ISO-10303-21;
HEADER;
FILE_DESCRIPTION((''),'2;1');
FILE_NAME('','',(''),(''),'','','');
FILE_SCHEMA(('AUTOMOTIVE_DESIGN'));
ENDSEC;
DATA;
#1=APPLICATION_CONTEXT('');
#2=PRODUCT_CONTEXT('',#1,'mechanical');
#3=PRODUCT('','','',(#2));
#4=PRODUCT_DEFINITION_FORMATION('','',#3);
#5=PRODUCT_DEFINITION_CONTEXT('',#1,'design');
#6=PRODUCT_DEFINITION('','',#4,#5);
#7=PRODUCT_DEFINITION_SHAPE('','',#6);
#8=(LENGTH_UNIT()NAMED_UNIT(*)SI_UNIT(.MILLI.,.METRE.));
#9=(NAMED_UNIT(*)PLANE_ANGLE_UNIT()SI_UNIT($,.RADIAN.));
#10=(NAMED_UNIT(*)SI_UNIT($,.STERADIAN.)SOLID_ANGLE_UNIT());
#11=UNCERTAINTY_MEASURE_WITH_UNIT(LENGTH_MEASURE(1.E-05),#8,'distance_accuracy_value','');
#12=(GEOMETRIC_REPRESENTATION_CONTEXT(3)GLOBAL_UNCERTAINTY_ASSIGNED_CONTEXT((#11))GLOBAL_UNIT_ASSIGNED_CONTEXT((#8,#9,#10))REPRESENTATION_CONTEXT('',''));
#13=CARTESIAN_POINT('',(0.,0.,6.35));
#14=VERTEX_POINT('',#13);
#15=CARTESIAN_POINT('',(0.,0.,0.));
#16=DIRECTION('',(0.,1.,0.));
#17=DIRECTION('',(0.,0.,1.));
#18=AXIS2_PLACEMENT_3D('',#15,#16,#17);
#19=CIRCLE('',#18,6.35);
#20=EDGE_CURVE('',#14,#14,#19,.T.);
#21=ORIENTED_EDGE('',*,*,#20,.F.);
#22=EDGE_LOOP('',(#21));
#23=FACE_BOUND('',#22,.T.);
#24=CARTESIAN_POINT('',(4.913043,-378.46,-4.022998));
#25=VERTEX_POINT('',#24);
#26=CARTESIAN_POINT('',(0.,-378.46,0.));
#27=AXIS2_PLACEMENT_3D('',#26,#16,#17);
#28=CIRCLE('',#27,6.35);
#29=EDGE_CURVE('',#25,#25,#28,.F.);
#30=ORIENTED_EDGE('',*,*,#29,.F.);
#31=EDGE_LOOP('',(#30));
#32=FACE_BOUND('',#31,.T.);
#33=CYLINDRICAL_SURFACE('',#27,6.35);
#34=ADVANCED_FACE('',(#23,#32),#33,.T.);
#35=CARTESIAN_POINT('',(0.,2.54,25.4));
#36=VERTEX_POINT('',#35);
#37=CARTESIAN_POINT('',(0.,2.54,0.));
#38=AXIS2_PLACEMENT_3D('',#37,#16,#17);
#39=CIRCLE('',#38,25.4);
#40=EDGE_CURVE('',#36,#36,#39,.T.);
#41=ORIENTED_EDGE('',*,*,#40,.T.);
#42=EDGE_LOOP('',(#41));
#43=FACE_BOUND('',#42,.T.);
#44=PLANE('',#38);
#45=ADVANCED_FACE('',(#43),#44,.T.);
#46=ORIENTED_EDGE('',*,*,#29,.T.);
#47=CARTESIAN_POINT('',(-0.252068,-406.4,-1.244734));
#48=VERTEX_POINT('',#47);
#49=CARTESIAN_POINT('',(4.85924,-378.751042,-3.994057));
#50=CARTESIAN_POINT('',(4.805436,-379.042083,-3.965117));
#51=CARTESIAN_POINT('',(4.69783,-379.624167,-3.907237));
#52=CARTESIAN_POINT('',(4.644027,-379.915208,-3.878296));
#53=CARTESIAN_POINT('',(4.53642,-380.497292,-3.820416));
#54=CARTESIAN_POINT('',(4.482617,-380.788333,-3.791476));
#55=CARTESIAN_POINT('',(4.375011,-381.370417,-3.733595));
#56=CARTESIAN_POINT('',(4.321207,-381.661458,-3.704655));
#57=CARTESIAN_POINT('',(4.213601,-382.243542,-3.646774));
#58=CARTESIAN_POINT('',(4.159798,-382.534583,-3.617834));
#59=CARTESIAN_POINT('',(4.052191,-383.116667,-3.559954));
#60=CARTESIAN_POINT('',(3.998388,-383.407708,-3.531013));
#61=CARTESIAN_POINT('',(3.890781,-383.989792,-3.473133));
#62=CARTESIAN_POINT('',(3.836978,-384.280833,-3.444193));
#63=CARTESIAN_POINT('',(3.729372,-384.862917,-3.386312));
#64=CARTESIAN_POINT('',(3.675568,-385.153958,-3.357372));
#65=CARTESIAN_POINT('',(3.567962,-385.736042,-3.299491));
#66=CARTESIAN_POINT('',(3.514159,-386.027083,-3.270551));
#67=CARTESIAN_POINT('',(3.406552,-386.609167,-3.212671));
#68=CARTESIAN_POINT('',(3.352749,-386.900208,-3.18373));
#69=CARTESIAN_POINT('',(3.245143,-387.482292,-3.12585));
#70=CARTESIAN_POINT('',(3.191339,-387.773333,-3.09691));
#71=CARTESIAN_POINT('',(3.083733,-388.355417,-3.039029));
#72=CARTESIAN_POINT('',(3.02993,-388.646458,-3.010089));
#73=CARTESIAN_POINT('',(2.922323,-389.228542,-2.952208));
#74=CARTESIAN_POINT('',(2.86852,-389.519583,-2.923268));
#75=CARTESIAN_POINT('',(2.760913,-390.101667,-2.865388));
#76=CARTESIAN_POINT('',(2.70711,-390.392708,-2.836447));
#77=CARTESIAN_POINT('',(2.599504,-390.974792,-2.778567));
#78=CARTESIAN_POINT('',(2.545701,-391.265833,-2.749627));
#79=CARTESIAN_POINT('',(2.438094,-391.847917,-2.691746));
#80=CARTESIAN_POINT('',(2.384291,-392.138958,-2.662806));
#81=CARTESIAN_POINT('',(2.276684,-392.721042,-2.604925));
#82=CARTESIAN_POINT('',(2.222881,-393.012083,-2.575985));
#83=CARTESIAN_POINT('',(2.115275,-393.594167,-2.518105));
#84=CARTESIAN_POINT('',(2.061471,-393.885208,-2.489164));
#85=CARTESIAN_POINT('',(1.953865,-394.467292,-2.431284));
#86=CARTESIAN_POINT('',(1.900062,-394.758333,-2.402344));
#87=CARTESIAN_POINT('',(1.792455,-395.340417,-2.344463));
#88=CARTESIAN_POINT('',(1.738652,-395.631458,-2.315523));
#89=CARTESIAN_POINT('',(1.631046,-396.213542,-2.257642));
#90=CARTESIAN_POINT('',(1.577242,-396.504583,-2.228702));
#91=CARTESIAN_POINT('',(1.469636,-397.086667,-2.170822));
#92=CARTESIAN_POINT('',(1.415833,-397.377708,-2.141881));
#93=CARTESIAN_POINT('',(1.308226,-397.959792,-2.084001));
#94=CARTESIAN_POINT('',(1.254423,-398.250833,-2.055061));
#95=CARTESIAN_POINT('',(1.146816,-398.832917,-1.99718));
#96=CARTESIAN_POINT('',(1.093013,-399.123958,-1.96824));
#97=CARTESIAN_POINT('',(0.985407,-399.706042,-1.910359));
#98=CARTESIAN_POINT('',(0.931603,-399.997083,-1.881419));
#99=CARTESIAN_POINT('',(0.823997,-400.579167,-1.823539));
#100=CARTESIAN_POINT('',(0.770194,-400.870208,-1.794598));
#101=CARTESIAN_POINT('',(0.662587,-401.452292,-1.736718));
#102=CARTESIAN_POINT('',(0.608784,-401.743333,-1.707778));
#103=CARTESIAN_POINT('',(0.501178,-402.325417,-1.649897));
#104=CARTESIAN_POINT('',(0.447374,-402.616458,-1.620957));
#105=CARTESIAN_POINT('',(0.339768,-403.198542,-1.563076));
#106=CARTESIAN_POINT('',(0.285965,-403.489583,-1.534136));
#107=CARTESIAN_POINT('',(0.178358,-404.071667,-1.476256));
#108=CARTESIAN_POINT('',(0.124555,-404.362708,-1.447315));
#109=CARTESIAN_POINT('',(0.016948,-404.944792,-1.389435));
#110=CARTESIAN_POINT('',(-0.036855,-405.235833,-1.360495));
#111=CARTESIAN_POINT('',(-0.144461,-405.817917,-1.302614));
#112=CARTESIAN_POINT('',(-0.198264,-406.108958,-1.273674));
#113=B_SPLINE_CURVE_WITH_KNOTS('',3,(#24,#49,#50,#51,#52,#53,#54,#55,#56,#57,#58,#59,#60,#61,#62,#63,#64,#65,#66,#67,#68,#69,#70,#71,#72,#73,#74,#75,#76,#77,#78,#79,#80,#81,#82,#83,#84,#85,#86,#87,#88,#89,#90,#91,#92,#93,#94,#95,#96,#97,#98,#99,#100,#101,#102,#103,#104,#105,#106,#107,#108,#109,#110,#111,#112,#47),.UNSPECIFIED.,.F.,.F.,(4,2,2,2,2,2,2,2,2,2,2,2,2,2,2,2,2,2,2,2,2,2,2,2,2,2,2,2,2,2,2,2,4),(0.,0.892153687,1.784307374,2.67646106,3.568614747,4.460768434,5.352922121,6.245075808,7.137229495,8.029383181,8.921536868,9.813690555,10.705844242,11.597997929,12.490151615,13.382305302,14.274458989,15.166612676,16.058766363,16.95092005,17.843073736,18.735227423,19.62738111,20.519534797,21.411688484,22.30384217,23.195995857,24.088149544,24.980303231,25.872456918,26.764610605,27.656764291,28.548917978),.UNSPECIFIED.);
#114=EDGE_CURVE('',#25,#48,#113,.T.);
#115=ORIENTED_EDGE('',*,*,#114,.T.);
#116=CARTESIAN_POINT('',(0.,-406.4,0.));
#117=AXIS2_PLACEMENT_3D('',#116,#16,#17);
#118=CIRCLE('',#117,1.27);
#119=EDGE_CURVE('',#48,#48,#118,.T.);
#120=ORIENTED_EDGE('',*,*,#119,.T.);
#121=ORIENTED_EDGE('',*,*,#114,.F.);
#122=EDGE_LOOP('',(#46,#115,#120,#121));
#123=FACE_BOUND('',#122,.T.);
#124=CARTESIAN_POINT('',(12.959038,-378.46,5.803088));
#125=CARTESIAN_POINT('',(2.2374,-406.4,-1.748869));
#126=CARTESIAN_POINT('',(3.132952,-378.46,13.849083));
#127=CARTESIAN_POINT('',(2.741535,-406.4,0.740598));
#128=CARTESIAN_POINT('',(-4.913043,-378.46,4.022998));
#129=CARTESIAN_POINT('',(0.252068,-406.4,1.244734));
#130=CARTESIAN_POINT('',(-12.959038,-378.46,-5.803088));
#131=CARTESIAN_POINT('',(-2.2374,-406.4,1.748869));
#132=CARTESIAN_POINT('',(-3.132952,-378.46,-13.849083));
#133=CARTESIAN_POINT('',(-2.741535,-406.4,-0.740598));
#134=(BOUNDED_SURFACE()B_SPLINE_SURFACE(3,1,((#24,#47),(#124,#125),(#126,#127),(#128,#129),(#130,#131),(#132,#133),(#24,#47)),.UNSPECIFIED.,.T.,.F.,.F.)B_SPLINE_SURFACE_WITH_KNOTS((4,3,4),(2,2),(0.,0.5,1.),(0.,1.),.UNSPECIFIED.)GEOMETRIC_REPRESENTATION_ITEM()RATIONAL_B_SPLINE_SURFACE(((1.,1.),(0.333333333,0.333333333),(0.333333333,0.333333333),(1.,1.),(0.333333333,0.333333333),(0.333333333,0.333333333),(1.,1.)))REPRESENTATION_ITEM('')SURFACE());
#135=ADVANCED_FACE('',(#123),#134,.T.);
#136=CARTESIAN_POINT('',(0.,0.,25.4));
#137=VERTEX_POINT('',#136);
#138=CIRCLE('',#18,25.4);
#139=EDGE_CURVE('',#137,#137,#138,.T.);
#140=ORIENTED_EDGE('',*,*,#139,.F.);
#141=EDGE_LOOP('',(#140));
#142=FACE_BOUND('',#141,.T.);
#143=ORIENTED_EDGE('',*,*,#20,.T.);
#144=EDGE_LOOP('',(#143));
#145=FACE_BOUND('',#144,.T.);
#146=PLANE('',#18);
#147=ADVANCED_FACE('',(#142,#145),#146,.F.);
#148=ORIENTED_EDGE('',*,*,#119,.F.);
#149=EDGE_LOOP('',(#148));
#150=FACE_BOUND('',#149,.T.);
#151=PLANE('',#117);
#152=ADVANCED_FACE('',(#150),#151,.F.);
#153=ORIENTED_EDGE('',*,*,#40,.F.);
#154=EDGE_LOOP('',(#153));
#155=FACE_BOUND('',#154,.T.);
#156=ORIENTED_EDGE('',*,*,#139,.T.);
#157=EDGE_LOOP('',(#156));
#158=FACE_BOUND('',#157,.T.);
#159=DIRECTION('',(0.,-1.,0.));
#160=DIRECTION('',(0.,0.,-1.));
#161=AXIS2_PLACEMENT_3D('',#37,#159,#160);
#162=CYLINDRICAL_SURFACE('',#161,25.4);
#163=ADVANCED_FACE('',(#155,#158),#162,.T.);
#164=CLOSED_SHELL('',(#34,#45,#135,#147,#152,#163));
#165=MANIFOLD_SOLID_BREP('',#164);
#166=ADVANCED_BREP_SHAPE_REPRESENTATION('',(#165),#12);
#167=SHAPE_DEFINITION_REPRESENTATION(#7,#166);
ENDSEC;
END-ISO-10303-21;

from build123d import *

# Parameters (mm, degrees)
SKETCH1_R           = 25.4
BOSS_EXTRUDE1_DEPTH = 2.54
SKETCH2_R           = 6.35
BOSS_EXTRUDE2_DEPTH = 381


with BuildPart() as part:
    # Sketch1 → Boss-Extrude1 (new body)
    with BuildSketch(Plane(origin=(0, 0, 0), x_dir=(1, 0, 0), z_dir=(0, 1, 0))):
        with Locations(Location((0, 0, 0), (0, 0, 270))):
            Circle(SKETCH1_R)
    extrude(amount=BOSS_EXTRUDE1_DEPTH)

    # Sketch2 → Boss-Extrude2 (add)
    with BuildSketch(Plane(origin=(0, 2.54, 0), x_dir=(1, 0, 0), z_dir=(0, 1, 0))):
        with Locations(Location((0, 0, 0), (0, 0, 270))):
            Circle(SKETCH2_R)
    extrude(amount=-BOSS_EXTRUDE2_DEPTH)

    # Loft1: read off the stored shape, not the designer's step
    # Loft1: loft between two sections, ruled curve by curve
    loft1_from = [
        Edge.make_bspline([(4.913042865, -378.46, -4.022997615), (12.959038094, -378.46, 5.803088115), (3.132952365, -378.46, 13.849083344), (-4.913042865, -378.46, 4.022997615), (-12.959038094, -378.46, -5.803088115), (-3.132952365, -378.46, -13.849083344), (4.913042865, -378.46, -4.022997615)], [0, 0, 0, 0, 0.5, 0.5, 0.5, 1, 1, 1, 1], 3, [1, 0.333333333, 0.333333333, 1, 0.333333333, 0.333333333, 1]),
    ]
    loft1_to = [
        Edge.make_bspline([(-0.252067696, -406.4, -1.244733657), (2.237399617, -406.4, -1.748869049), (2.74153501, -406.4, 0.740598264), (0.252067696, -406.4, 1.244733657), (-2.237399617, -406.4, 1.748869049), (-2.74153501, -406.4, -0.740598264), (-0.252067696, -406.4, -1.244733657)], [0, 0, 0, 0, 0.5, 0.5, 0.5, 1, 1, 1, 1], 3, [1, 0.333333333, 0.333333333, 1, 0.333333333, 0.333333333, 1]),
    ]
    loft1 = Solid(Shell([*[Face.make_surface_from_curves(loft1_from[k], loft1_to[k]) for k in range(1)], Face(Wire(loft1_from)), Face(Wire(loft1_to))]))
    add(loft1)


solid = part.part
